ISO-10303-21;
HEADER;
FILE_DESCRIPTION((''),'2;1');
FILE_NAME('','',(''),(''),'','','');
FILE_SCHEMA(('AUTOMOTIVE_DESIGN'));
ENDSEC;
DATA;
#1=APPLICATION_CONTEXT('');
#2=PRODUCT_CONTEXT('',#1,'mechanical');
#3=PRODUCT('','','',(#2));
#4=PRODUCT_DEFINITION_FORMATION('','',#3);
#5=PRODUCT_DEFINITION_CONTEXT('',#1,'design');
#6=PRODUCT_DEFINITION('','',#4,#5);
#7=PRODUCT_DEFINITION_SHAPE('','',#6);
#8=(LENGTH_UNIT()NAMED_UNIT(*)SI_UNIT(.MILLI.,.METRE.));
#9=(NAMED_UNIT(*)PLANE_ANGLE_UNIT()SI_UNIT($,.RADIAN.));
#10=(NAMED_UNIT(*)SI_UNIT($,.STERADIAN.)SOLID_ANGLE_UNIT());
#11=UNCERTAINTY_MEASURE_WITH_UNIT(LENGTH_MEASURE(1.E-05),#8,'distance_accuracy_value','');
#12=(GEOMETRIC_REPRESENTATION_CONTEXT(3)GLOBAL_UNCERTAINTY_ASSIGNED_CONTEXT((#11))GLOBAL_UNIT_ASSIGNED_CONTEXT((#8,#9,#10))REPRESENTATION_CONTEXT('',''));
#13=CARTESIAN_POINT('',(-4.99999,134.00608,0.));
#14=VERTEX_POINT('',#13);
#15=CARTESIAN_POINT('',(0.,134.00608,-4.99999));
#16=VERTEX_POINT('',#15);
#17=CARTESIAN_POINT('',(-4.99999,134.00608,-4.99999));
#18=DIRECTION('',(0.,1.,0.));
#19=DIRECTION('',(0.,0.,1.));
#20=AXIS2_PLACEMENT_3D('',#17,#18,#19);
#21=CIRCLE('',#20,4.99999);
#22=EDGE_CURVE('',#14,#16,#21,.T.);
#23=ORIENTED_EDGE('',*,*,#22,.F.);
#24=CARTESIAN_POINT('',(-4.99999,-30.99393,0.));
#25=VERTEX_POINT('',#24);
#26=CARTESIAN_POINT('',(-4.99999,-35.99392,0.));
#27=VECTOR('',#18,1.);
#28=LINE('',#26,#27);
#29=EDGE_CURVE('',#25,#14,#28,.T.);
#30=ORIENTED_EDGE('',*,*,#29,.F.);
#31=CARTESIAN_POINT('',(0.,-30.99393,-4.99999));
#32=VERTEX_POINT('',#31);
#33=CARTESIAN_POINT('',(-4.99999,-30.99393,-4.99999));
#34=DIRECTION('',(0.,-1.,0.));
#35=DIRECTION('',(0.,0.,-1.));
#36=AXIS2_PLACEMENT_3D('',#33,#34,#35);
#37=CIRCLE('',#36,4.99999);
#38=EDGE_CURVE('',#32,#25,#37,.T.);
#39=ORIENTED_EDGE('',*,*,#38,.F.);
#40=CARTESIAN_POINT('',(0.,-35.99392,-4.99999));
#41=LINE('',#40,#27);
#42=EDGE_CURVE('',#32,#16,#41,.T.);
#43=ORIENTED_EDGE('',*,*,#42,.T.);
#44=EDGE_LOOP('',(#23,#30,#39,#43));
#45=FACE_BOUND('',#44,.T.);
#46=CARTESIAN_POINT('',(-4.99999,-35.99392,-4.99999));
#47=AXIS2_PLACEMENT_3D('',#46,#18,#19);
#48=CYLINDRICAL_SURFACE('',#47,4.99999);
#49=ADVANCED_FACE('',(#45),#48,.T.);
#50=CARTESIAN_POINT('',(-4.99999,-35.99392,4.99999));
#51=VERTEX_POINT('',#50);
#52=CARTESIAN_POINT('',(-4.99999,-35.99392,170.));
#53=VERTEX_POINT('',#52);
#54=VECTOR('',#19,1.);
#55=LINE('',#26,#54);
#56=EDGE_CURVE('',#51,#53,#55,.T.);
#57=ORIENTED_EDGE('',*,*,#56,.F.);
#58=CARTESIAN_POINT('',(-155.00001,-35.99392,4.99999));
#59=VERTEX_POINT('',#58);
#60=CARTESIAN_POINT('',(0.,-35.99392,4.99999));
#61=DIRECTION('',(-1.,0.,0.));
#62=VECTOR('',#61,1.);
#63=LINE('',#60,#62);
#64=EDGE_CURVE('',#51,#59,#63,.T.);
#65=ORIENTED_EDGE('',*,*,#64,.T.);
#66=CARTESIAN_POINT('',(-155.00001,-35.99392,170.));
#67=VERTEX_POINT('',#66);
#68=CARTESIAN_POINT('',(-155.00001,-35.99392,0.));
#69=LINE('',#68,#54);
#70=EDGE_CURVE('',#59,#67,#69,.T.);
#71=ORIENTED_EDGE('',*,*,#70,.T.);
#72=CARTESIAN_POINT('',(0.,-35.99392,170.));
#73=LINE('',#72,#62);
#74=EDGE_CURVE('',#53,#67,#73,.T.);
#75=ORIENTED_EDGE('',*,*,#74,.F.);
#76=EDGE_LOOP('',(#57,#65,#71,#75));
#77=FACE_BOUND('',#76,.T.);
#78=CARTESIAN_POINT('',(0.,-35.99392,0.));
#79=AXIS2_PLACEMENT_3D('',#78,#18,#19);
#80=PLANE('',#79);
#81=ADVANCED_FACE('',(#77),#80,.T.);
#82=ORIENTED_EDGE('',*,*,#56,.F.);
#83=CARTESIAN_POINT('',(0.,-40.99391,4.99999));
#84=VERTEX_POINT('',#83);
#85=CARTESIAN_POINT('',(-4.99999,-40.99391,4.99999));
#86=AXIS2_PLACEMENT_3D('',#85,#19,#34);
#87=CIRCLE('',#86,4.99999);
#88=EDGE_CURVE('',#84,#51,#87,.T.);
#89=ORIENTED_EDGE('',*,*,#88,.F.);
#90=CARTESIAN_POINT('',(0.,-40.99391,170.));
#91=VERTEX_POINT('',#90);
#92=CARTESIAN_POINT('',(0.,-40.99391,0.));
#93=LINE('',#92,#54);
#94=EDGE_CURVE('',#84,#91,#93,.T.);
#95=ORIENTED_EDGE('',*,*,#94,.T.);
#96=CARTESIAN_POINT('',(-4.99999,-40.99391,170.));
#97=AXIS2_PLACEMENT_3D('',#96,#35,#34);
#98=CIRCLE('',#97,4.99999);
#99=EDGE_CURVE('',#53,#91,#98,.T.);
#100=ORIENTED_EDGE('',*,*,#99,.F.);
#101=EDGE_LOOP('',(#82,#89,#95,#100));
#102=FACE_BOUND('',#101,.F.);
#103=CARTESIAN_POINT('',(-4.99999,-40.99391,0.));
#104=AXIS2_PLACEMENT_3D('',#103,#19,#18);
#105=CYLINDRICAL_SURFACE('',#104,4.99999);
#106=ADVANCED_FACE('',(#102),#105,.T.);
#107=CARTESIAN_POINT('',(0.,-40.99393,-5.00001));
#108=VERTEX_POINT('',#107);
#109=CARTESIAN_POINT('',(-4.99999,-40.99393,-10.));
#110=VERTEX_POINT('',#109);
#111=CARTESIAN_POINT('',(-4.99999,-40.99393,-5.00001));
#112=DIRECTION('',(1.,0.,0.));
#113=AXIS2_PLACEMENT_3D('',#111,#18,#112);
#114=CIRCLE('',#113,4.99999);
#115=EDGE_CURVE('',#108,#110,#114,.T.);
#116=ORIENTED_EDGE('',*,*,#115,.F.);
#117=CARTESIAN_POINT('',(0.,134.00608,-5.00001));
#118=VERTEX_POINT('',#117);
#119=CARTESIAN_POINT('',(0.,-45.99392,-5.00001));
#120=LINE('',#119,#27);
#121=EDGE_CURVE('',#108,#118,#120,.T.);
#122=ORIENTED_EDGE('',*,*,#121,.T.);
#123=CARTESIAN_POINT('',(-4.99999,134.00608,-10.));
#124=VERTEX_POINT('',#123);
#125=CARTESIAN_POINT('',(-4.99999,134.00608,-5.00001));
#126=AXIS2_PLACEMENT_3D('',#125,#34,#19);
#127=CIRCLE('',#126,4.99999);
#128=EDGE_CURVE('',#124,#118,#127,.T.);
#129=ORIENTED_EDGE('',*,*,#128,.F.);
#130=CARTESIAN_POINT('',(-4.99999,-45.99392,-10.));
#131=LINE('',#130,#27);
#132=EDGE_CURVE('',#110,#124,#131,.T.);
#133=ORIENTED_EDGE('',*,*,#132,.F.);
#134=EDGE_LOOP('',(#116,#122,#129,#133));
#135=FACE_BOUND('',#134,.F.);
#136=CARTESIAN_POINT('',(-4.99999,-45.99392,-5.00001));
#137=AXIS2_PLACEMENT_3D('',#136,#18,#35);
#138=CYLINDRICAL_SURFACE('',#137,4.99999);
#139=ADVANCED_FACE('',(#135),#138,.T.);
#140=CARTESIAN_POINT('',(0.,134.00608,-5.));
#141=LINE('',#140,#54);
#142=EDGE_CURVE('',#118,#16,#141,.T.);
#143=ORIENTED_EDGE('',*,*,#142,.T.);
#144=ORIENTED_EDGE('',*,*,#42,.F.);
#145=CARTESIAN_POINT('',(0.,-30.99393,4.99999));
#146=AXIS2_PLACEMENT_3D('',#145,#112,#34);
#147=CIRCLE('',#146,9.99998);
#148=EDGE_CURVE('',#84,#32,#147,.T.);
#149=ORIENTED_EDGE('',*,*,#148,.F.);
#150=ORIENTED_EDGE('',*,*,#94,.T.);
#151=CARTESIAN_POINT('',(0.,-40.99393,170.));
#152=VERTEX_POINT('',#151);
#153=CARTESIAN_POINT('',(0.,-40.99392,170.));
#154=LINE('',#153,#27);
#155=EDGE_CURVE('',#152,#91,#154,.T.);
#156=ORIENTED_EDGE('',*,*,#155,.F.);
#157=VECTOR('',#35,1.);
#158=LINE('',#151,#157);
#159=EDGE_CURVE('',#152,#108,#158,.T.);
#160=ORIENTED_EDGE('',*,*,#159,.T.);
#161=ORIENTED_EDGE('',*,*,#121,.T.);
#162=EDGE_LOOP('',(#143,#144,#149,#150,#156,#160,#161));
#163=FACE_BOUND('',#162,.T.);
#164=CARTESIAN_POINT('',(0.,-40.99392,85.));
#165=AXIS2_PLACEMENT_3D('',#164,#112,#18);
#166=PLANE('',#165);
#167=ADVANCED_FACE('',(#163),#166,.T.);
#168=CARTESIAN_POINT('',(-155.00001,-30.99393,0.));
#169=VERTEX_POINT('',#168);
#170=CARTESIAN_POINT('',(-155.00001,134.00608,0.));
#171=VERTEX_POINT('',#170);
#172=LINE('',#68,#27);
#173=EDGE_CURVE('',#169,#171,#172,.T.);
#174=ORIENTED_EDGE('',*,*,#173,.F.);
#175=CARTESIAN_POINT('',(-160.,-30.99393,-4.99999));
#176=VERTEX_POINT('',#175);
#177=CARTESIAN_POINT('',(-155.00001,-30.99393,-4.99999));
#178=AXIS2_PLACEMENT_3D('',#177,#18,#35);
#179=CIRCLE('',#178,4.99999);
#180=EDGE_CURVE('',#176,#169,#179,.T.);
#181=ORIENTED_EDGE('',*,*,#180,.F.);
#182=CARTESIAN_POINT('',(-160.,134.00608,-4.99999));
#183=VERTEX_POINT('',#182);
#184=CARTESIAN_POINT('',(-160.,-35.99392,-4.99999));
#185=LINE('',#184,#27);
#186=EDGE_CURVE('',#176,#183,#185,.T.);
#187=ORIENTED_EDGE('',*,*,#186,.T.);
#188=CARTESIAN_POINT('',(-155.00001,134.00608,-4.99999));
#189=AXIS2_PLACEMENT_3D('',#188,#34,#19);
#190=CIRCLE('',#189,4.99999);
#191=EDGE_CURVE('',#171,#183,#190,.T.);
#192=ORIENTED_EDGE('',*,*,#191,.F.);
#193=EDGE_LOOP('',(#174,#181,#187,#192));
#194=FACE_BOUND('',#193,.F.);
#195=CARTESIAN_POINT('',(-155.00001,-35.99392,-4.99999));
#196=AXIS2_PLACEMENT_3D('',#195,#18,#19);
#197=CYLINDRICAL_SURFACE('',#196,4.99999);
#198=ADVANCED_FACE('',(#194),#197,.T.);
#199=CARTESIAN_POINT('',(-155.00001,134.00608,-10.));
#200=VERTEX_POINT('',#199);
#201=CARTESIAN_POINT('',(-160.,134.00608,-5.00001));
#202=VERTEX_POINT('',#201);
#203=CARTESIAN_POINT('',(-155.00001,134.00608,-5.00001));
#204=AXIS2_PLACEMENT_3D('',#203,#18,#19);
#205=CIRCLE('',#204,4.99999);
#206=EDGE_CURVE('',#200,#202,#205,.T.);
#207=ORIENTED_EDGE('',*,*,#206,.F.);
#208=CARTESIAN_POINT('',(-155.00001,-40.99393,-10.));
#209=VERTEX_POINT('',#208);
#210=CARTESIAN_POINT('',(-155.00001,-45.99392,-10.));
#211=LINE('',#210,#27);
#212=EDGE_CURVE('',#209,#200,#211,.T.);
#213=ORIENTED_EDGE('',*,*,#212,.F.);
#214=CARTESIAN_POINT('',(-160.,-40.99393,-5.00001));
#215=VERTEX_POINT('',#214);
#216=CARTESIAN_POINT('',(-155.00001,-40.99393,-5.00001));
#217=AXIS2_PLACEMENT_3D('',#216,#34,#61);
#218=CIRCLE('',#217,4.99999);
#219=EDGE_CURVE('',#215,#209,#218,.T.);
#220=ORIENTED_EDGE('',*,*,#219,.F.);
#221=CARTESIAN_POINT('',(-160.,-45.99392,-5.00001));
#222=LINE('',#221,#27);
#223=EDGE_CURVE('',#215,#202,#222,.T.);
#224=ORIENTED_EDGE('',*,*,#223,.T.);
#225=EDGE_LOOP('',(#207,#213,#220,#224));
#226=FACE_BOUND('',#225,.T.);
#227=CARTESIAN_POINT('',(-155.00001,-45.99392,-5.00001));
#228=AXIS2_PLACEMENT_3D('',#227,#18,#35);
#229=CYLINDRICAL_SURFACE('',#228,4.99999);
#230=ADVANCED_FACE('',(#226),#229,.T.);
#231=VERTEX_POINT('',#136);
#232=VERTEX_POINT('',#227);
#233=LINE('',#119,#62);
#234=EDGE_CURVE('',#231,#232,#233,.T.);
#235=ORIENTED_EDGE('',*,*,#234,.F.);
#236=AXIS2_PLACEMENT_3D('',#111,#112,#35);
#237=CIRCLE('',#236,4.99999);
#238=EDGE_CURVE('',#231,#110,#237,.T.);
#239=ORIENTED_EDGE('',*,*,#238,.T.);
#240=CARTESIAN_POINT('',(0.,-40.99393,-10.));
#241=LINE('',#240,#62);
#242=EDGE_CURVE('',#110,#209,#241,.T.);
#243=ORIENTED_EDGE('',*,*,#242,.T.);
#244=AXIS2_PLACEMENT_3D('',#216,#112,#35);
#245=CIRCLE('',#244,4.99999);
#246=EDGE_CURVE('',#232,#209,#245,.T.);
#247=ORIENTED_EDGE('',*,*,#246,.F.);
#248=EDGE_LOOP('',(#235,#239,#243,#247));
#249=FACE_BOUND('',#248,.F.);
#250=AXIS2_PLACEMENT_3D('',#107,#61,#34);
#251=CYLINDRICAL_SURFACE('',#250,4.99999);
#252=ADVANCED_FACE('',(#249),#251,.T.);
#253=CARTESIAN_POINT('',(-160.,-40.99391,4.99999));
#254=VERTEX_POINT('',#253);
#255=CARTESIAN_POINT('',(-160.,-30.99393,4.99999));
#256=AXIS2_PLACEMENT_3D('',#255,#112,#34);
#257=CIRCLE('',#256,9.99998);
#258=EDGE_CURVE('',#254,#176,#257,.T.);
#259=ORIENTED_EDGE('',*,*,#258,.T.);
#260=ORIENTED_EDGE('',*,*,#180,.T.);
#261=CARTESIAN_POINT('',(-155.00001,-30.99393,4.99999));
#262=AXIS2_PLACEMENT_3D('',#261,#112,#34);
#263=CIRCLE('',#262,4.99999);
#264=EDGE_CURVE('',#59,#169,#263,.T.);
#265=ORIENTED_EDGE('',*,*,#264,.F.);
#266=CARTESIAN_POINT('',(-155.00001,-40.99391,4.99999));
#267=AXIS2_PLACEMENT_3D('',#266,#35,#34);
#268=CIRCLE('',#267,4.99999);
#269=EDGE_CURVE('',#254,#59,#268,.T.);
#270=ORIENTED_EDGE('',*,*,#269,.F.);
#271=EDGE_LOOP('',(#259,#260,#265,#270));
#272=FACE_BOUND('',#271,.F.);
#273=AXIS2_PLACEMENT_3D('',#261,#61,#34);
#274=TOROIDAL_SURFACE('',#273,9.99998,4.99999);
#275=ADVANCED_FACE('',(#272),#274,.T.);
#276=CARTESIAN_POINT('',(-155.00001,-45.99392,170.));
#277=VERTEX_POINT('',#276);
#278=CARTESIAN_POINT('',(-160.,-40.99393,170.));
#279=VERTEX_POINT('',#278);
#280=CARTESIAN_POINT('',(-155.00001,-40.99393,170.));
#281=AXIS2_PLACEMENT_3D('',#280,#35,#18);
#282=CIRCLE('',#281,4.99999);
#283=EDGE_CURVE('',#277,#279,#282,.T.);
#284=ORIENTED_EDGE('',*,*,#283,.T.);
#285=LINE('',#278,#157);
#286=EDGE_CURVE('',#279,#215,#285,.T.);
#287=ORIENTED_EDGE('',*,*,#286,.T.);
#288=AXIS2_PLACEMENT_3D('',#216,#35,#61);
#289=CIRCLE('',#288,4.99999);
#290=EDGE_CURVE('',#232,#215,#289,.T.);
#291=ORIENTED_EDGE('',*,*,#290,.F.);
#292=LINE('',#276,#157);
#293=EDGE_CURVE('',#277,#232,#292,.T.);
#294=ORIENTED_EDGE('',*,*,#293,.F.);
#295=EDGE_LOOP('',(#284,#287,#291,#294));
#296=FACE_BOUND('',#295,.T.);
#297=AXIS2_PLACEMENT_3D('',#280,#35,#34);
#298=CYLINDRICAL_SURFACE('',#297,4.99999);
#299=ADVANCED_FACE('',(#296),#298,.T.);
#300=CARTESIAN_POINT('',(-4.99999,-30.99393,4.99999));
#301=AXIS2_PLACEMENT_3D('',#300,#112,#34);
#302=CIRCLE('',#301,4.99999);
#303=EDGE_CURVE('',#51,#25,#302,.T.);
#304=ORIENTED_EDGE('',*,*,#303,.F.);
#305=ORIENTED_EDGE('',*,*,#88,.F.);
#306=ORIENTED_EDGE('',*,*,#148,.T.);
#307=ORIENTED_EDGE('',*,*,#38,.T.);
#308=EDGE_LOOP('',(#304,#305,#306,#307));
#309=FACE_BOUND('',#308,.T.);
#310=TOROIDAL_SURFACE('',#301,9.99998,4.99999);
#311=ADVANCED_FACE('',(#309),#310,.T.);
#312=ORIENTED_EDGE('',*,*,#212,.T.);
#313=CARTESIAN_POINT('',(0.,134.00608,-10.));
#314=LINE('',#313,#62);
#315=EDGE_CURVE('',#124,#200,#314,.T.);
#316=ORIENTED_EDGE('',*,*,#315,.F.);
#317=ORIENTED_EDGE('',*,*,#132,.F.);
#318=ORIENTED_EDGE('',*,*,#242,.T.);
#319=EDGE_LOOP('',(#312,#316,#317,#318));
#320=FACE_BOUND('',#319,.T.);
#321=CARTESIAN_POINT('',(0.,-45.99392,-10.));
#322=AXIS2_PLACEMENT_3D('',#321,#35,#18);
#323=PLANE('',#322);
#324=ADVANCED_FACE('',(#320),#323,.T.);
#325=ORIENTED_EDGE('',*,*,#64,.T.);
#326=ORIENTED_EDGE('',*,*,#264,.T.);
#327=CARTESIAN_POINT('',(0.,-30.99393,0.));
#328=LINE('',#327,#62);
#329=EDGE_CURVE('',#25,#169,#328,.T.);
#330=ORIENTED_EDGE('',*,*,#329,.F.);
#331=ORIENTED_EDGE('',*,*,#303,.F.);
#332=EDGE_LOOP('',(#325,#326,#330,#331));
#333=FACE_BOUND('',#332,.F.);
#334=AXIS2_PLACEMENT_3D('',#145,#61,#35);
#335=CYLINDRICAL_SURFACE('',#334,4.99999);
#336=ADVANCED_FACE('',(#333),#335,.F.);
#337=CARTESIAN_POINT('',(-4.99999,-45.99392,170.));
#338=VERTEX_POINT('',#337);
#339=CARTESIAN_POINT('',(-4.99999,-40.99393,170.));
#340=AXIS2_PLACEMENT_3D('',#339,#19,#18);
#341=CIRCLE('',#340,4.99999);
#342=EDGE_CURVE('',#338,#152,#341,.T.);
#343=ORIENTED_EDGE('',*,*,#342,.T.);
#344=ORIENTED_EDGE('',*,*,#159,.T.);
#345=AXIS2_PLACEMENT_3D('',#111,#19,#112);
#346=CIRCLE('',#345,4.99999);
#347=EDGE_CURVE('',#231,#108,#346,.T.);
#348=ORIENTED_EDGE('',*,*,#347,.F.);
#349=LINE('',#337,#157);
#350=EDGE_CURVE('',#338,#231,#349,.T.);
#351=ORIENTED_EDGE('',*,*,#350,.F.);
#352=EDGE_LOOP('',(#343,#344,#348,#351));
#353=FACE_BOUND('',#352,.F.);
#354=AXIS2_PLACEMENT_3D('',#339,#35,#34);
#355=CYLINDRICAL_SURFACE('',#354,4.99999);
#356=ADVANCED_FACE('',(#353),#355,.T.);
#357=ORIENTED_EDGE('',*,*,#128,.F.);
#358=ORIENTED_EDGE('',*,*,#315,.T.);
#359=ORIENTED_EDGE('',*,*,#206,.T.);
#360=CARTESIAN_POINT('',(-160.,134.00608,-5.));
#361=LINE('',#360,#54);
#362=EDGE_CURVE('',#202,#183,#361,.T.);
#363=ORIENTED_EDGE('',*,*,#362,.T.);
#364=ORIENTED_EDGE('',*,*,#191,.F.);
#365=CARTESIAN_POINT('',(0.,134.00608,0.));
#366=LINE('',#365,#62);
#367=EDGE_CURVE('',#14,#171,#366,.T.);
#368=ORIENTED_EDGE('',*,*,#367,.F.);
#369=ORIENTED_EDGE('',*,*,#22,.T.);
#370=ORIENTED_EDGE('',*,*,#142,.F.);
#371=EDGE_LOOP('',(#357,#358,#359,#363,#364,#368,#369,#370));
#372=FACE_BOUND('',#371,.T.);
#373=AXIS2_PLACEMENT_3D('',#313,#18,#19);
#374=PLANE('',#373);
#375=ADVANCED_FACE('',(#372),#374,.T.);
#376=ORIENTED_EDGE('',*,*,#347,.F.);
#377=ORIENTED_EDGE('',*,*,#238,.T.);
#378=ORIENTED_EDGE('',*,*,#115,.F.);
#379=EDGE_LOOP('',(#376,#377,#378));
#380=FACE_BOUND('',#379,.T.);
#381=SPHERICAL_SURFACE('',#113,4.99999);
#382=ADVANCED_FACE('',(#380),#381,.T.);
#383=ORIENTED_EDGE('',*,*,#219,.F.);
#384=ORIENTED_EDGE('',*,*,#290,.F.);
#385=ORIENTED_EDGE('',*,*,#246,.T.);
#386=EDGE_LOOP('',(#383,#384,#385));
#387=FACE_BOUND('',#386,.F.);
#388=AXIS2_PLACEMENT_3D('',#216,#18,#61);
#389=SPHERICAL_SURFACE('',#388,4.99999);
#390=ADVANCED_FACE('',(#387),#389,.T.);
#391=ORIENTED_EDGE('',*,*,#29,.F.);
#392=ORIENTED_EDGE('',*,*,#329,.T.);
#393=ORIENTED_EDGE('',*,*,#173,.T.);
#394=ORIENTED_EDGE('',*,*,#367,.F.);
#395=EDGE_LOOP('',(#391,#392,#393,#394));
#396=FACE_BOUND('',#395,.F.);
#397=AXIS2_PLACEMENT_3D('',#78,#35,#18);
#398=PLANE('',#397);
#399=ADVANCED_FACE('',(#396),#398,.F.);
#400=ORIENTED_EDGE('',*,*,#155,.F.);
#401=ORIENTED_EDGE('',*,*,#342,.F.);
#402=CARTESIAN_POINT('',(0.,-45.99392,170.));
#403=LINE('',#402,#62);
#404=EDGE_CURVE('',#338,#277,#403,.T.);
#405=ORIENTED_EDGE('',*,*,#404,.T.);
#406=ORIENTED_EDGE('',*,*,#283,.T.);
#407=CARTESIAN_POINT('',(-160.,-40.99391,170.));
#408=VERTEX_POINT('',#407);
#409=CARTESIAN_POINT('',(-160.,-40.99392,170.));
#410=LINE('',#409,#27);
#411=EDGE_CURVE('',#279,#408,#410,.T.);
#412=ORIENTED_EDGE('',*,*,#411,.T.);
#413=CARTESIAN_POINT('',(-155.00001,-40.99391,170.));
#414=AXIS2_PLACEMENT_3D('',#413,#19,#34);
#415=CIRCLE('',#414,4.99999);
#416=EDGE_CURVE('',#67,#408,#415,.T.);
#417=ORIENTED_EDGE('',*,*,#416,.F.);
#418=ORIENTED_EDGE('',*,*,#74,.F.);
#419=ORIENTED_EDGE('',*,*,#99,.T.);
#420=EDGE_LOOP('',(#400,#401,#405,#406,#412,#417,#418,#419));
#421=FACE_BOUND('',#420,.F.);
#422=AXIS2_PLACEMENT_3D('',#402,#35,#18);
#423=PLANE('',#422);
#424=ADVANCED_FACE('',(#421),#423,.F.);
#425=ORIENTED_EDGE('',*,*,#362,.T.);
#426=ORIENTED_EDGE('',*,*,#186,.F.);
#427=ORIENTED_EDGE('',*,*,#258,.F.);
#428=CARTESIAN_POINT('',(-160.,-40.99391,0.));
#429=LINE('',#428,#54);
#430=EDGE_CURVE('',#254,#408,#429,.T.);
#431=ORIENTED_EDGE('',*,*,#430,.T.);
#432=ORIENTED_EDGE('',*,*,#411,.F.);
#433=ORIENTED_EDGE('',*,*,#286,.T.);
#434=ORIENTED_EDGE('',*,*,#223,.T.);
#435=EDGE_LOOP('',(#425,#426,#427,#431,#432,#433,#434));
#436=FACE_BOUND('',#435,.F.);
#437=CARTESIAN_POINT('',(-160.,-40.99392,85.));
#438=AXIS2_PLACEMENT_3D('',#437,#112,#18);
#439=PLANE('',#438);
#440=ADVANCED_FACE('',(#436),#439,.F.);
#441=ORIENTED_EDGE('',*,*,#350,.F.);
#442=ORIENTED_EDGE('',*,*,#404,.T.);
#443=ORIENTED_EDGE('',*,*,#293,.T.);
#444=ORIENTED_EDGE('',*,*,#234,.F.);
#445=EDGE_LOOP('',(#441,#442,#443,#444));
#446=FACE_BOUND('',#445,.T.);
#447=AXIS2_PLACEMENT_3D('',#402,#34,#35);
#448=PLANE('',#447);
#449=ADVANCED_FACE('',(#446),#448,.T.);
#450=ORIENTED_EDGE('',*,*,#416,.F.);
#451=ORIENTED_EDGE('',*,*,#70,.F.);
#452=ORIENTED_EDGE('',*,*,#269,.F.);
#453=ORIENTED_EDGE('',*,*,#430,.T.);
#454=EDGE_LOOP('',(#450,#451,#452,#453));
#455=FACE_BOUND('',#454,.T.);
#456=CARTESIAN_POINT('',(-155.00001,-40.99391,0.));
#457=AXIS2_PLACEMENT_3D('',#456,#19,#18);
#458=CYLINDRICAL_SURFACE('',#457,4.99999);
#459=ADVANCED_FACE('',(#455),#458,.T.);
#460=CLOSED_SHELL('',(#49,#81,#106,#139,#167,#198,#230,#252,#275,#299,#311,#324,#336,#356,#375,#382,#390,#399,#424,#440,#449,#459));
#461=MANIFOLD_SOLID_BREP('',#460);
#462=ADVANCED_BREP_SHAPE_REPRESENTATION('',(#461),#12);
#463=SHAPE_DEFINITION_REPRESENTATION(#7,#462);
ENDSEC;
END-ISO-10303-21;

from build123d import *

# Parameters (mm, degrees)
F0_W     = 10
F0_H     = 170
F0_H_2   = 10
F0_W_2   = 170
F1_DEPTH = 160
F2_R     = 4.99999


# Not quite as in the source:
# - a fillet or chamfer is up to 0.001 mm smaller than in the source, because OpenCascade refuses the exact size


with BuildPart() as f1:
    # F0 (on Right) → F1 (new body)
    with BuildSketch(Plane.YZ):
        with Locations((-40.9939204156, 85)):
            Rectangle(F0_W, F0_H)
        with Locations((-40.9939204156, -5)):
            Rectangle(F0_W, F0_H_2)
        with Locations((49.0060795844, -5)):
            Rectangle(F0_W_2, F0_H_2)
    extrude(amount=-F1_DEPTH)

    # F2 (radius 5 in the source; OpenCascade refuses exactly that, so slightly less here)
    f2_edges = [f1.edges().sort_by_distance(p)[0] for p in [
        (0, 49.00608, 0),
        (0, 44.00608, -10),
        (-160, 49.00608, 0),
        (-160, 44.00608, -10),
        (-80, -35.99392, 0),
        (-160, -35.99392, 85),
        (-160, -45.99392, 80),
        (0, -35.99392, 85),
        (0, -45.99392, 80),
        (-80, -45.99392, -10),
    ]]
    fillet(f2_edges, radius=F2_R)


solid = f1.part
